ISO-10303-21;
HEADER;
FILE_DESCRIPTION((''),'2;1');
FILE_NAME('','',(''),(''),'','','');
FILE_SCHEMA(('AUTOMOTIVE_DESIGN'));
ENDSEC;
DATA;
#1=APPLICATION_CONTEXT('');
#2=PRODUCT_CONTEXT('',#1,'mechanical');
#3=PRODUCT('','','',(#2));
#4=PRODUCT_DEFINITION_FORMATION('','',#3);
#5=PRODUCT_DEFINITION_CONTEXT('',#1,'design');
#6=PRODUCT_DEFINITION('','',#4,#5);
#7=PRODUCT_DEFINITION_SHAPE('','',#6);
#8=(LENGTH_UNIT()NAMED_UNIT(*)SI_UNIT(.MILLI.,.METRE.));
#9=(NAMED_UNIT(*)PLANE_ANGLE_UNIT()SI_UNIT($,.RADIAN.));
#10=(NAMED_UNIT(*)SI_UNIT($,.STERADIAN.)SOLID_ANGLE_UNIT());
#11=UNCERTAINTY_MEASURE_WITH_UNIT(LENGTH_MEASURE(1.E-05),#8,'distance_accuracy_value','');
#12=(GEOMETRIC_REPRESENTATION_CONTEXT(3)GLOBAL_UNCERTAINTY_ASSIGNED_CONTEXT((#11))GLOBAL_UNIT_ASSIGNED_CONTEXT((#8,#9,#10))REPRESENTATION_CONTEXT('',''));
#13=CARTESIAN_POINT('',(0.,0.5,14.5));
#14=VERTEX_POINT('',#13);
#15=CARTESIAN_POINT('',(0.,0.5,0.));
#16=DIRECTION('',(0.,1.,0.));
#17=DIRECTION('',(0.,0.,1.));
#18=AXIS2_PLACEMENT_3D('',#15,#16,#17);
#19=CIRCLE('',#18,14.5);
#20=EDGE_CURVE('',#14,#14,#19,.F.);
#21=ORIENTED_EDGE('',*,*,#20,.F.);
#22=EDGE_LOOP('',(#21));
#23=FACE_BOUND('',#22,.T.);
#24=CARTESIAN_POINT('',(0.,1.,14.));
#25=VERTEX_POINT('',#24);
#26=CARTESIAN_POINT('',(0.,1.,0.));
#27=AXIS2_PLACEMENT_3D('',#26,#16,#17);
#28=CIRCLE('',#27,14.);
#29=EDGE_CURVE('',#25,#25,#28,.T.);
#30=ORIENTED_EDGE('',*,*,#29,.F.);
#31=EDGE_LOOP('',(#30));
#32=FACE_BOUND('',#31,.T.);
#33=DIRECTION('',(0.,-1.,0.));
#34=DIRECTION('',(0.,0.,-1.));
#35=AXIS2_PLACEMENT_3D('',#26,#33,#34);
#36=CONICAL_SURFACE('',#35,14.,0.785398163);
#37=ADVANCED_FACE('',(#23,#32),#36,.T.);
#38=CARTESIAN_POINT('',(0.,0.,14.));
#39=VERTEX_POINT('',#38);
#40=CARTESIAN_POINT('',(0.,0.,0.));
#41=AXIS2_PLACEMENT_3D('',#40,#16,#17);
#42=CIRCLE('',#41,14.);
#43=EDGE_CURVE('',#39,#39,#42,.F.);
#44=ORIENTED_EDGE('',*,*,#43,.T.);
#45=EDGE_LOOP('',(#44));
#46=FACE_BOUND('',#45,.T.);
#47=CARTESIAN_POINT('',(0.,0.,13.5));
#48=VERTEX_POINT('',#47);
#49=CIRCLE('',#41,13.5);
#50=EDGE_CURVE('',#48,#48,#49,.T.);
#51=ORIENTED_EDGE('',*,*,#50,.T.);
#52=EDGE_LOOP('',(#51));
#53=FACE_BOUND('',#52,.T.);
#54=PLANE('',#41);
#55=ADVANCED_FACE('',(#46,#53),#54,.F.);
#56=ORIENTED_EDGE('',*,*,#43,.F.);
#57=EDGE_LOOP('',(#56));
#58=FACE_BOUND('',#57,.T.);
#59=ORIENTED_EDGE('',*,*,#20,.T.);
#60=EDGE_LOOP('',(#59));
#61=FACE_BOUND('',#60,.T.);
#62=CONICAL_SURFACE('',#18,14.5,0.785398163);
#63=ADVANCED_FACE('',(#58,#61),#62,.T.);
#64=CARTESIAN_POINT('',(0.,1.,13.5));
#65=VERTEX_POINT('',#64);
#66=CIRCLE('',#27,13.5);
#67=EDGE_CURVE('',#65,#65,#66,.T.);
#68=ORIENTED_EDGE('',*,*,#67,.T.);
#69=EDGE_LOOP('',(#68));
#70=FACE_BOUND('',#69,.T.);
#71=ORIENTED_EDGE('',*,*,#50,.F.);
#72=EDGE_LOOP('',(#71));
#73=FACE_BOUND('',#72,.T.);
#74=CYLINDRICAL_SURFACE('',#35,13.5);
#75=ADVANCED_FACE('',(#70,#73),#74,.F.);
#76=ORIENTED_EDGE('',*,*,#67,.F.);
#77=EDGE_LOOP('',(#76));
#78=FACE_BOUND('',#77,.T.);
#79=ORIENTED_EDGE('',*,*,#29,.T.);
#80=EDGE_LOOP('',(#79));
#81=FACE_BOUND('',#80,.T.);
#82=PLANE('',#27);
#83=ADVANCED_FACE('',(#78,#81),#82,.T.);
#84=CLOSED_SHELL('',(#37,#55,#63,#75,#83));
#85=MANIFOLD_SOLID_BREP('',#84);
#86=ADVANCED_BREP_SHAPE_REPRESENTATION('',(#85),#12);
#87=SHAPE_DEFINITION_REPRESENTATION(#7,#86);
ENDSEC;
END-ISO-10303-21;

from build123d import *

# Parameters (mm, degrees)
SKETCH3_R           = 14.5
SKETCH3_R_2         = 13.5
BOSS_EXTRUDE2_DEPTH = 1
CHAMFER1_SIZE       = 0.5


with BuildPart() as part:
    # Sketch3 → Boss-Extrude2 (new body)
    with BuildSketch(Plane(origin=(0, 0, 0), x_dir=(1, 0, 0), z_dir=(0, 1, 0))):
        with Locations(Location((0, 0, 0), (0, 0, 270))):
            Circle(SKETCH3_R)
        with Locations(Location((0, 0, 0), (0, 0, 270))):
            Circle(SKETCH3_R_2, mode=Mode.SUBTRACT)
    extrude(amount=BOSS_EXTRUDE2_DEPTH)

    # Chamfer1
    # the kernel refuses this chamfer: 0.5 mm, written as the material it takes off along each edge
    with BuildSketch(Plane(origin=(0, 0, 0), x_dir=(0, 0, 1), z_dir=(-1, 0, 0))) as chamfer1_piece_1:
        Polygon((14.5, CHAMFER1_SIZE), (14.5 - CHAMFER1_SIZE, 0), (14.5, 0), align=None)
    revolve(axis=Axis((0, 0, 0), (0, 1, 0)), mode=Mode.SUBTRACT)
    with BuildSketch(Plane(origin=(0, 1, 0), x_dir=(0, 0, 1), z_dir=(-1, 0, 0))) as chamfer1_piece_2:
        Polygon((14.5, -CHAMFER1_SIZE), (14.5 - CHAMFER1_SIZE, 0), (14.5, 0), align=None)
    revolve(axis=Axis((0, 1, 0), (0, 1, 0)), mode=Mode.SUBTRACT)


solid = part.part
